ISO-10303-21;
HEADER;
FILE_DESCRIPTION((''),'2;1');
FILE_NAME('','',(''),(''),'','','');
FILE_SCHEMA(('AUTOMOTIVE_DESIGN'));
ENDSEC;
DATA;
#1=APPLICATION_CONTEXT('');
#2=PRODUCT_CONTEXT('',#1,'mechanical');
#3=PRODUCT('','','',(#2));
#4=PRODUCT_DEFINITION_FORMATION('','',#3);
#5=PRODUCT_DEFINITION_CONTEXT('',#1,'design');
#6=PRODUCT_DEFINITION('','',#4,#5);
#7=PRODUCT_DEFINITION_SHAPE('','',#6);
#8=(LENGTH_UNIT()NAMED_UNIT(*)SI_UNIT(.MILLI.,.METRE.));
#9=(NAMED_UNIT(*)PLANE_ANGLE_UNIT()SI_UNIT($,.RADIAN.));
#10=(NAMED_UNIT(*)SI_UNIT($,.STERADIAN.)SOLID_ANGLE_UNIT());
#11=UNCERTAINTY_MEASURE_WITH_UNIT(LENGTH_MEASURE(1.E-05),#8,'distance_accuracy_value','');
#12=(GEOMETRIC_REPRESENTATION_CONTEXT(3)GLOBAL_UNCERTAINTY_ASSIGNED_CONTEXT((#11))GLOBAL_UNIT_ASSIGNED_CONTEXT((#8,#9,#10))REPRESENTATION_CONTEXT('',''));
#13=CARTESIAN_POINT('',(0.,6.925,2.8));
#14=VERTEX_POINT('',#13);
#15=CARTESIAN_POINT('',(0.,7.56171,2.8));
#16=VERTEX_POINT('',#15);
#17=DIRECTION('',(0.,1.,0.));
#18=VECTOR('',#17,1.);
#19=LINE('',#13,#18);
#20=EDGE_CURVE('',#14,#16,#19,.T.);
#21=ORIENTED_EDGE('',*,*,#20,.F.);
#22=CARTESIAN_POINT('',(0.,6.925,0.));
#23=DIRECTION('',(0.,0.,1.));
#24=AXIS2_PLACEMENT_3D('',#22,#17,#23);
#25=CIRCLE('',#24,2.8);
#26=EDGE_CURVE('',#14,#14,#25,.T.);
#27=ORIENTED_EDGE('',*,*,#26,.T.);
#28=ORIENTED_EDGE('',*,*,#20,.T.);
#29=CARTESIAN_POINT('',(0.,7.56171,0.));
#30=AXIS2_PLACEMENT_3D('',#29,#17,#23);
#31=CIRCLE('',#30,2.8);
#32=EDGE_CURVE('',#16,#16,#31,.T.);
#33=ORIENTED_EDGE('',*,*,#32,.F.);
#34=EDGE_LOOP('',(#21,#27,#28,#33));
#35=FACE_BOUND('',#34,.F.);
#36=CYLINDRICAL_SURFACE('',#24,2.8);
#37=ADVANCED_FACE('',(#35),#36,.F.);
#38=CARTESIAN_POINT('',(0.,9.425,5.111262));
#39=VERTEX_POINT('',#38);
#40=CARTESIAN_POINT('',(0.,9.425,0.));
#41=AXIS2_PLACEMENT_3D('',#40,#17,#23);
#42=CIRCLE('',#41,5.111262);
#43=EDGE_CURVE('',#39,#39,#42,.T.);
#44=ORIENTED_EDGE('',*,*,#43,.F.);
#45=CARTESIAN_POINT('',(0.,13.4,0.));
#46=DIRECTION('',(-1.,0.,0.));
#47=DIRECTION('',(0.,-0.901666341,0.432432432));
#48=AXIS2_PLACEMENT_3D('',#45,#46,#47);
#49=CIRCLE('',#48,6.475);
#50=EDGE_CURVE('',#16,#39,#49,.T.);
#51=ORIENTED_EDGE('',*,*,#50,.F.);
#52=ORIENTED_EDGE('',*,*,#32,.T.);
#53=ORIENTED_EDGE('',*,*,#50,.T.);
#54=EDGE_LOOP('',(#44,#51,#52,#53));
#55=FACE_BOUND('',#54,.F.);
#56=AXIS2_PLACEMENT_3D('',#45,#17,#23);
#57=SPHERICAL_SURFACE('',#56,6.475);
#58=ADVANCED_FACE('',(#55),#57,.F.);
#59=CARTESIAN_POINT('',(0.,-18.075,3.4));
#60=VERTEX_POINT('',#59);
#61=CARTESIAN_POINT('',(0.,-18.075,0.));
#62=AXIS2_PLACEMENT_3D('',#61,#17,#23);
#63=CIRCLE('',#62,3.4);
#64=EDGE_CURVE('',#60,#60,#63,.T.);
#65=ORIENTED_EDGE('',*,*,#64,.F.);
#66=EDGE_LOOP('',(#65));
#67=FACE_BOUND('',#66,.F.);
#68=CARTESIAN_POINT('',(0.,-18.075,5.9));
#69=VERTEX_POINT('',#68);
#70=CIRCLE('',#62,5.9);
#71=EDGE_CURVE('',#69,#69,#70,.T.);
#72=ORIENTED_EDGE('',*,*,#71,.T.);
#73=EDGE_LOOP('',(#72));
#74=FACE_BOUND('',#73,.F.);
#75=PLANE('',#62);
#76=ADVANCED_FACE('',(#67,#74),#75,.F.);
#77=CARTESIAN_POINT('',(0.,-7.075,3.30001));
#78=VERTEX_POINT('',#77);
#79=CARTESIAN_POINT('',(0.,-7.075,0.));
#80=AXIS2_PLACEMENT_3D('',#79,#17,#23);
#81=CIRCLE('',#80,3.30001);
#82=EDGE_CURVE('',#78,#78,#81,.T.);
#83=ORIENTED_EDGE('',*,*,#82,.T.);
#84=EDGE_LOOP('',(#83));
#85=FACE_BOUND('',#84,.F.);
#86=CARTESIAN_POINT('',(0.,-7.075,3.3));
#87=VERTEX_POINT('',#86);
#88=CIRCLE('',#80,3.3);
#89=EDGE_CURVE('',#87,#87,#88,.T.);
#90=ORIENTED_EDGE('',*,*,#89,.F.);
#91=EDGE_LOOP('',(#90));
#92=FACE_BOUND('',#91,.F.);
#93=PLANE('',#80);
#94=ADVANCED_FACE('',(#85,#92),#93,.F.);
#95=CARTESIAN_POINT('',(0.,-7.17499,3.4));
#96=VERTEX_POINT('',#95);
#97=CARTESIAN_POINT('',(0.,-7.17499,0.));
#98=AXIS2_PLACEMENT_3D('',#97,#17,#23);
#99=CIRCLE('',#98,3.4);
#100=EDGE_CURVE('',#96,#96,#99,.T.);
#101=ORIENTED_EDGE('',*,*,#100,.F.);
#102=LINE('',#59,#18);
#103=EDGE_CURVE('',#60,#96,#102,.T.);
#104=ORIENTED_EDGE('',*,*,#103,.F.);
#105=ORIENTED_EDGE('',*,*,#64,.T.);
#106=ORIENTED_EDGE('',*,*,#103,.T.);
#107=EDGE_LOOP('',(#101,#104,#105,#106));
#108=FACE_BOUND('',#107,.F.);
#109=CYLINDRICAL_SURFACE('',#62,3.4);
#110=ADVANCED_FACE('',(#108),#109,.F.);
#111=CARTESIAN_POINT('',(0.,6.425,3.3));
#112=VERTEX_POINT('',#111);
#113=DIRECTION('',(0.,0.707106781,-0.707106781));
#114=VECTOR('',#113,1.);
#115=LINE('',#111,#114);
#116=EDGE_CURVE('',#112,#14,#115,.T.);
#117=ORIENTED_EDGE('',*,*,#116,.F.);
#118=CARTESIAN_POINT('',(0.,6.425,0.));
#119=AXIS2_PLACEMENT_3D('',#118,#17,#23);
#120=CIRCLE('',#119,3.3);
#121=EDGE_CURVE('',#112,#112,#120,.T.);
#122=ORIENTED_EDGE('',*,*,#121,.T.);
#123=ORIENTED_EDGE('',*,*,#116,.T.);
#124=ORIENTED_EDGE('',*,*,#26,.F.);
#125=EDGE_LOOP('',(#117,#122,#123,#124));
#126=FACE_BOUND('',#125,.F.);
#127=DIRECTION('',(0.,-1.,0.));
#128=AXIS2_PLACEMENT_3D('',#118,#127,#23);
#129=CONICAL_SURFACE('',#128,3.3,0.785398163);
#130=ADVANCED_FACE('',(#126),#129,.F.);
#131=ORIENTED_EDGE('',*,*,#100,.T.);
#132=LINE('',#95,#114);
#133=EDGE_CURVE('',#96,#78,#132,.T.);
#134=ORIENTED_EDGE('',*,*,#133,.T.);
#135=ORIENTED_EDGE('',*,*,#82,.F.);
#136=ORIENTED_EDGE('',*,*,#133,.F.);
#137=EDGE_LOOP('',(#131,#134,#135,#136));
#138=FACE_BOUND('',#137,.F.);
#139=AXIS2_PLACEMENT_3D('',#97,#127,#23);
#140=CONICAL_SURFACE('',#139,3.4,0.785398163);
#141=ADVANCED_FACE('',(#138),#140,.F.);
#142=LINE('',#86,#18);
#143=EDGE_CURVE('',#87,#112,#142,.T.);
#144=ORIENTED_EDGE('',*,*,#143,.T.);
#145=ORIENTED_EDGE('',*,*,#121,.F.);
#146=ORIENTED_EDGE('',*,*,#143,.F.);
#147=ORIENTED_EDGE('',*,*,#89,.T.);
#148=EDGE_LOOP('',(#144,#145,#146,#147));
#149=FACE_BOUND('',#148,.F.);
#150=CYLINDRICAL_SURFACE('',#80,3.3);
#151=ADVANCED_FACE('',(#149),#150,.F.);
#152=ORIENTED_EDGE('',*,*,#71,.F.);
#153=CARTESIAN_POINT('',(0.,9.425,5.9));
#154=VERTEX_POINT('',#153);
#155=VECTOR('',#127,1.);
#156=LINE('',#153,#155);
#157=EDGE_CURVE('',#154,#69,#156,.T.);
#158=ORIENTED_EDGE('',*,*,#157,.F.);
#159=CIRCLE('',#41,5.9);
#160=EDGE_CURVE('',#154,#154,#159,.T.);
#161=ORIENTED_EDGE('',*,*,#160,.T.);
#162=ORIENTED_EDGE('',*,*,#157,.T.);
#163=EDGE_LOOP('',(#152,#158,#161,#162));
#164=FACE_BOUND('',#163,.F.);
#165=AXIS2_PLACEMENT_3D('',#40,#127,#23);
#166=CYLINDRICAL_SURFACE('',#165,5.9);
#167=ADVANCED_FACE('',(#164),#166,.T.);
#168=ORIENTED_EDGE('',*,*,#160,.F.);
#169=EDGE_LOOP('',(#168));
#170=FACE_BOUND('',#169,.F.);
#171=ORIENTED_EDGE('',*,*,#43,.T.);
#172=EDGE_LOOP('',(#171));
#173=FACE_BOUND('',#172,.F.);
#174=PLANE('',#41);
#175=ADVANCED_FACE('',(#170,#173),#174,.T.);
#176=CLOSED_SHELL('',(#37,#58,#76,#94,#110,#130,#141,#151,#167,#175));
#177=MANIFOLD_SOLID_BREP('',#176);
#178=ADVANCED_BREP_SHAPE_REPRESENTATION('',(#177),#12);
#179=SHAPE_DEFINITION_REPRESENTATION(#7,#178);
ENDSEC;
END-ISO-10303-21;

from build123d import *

# Parameters (mm, degrees)
F2_SIZE = 0.09999


# Not quite as in the source:
# - a fillet or chamfer is up to 0.001 mm smaller than in the source, because OpenCascade refuses the exact size


with BuildPart() as f1:
    # F0 (on Right) → F1 (revolve)
    with BuildSketch(Plane.YZ):
        Polygon((6.425, 3.3), (6.925, 2.8), (6.925, 3.3), align=None)
        with BuildLine():
            ThreePointArc((7.5617104388, 2.8), (8.3591026496, 4.0638625595), (9.425, 5.1112620751))
            Line((9.425, 5.1112620751), (9.425, 5.9))
            Line((9.425, 5.9), (-18.075, 5.9))
            Line((-18.075, 5.9), (-18.075, 3.4))
            Line((-18.075, 3.4), (-7.075, 3.4))
            Line((-7.075, 3.4), (-7.075, 3.3))
            Line((-7.075, 3.3), (-6.425, 3.3))
            Line((-6.425, 3.3), (6.425, 3.3))
            Line((6.425, 3.3), (6.925, 3.3))
            Line((6.925, 3.3), (6.925, 2.8))
            Line((6.925, 2.8), (7.5617104388, 2.8))
        make_face()
    revolve(axis=Axis((0, 1.2040399015, 0), (0, 1, 0)))

    # F2 (size 0.1 in the source; OpenCascade refuses exactly that, so slightly less here)
    f2_edges = [f1.edges().sort_by_distance(p)[0] for p in [
        (0, -7.075, -3.4),
    ]]
    chamfer(f2_edges, length=F2_SIZE)


solid = f1.part
